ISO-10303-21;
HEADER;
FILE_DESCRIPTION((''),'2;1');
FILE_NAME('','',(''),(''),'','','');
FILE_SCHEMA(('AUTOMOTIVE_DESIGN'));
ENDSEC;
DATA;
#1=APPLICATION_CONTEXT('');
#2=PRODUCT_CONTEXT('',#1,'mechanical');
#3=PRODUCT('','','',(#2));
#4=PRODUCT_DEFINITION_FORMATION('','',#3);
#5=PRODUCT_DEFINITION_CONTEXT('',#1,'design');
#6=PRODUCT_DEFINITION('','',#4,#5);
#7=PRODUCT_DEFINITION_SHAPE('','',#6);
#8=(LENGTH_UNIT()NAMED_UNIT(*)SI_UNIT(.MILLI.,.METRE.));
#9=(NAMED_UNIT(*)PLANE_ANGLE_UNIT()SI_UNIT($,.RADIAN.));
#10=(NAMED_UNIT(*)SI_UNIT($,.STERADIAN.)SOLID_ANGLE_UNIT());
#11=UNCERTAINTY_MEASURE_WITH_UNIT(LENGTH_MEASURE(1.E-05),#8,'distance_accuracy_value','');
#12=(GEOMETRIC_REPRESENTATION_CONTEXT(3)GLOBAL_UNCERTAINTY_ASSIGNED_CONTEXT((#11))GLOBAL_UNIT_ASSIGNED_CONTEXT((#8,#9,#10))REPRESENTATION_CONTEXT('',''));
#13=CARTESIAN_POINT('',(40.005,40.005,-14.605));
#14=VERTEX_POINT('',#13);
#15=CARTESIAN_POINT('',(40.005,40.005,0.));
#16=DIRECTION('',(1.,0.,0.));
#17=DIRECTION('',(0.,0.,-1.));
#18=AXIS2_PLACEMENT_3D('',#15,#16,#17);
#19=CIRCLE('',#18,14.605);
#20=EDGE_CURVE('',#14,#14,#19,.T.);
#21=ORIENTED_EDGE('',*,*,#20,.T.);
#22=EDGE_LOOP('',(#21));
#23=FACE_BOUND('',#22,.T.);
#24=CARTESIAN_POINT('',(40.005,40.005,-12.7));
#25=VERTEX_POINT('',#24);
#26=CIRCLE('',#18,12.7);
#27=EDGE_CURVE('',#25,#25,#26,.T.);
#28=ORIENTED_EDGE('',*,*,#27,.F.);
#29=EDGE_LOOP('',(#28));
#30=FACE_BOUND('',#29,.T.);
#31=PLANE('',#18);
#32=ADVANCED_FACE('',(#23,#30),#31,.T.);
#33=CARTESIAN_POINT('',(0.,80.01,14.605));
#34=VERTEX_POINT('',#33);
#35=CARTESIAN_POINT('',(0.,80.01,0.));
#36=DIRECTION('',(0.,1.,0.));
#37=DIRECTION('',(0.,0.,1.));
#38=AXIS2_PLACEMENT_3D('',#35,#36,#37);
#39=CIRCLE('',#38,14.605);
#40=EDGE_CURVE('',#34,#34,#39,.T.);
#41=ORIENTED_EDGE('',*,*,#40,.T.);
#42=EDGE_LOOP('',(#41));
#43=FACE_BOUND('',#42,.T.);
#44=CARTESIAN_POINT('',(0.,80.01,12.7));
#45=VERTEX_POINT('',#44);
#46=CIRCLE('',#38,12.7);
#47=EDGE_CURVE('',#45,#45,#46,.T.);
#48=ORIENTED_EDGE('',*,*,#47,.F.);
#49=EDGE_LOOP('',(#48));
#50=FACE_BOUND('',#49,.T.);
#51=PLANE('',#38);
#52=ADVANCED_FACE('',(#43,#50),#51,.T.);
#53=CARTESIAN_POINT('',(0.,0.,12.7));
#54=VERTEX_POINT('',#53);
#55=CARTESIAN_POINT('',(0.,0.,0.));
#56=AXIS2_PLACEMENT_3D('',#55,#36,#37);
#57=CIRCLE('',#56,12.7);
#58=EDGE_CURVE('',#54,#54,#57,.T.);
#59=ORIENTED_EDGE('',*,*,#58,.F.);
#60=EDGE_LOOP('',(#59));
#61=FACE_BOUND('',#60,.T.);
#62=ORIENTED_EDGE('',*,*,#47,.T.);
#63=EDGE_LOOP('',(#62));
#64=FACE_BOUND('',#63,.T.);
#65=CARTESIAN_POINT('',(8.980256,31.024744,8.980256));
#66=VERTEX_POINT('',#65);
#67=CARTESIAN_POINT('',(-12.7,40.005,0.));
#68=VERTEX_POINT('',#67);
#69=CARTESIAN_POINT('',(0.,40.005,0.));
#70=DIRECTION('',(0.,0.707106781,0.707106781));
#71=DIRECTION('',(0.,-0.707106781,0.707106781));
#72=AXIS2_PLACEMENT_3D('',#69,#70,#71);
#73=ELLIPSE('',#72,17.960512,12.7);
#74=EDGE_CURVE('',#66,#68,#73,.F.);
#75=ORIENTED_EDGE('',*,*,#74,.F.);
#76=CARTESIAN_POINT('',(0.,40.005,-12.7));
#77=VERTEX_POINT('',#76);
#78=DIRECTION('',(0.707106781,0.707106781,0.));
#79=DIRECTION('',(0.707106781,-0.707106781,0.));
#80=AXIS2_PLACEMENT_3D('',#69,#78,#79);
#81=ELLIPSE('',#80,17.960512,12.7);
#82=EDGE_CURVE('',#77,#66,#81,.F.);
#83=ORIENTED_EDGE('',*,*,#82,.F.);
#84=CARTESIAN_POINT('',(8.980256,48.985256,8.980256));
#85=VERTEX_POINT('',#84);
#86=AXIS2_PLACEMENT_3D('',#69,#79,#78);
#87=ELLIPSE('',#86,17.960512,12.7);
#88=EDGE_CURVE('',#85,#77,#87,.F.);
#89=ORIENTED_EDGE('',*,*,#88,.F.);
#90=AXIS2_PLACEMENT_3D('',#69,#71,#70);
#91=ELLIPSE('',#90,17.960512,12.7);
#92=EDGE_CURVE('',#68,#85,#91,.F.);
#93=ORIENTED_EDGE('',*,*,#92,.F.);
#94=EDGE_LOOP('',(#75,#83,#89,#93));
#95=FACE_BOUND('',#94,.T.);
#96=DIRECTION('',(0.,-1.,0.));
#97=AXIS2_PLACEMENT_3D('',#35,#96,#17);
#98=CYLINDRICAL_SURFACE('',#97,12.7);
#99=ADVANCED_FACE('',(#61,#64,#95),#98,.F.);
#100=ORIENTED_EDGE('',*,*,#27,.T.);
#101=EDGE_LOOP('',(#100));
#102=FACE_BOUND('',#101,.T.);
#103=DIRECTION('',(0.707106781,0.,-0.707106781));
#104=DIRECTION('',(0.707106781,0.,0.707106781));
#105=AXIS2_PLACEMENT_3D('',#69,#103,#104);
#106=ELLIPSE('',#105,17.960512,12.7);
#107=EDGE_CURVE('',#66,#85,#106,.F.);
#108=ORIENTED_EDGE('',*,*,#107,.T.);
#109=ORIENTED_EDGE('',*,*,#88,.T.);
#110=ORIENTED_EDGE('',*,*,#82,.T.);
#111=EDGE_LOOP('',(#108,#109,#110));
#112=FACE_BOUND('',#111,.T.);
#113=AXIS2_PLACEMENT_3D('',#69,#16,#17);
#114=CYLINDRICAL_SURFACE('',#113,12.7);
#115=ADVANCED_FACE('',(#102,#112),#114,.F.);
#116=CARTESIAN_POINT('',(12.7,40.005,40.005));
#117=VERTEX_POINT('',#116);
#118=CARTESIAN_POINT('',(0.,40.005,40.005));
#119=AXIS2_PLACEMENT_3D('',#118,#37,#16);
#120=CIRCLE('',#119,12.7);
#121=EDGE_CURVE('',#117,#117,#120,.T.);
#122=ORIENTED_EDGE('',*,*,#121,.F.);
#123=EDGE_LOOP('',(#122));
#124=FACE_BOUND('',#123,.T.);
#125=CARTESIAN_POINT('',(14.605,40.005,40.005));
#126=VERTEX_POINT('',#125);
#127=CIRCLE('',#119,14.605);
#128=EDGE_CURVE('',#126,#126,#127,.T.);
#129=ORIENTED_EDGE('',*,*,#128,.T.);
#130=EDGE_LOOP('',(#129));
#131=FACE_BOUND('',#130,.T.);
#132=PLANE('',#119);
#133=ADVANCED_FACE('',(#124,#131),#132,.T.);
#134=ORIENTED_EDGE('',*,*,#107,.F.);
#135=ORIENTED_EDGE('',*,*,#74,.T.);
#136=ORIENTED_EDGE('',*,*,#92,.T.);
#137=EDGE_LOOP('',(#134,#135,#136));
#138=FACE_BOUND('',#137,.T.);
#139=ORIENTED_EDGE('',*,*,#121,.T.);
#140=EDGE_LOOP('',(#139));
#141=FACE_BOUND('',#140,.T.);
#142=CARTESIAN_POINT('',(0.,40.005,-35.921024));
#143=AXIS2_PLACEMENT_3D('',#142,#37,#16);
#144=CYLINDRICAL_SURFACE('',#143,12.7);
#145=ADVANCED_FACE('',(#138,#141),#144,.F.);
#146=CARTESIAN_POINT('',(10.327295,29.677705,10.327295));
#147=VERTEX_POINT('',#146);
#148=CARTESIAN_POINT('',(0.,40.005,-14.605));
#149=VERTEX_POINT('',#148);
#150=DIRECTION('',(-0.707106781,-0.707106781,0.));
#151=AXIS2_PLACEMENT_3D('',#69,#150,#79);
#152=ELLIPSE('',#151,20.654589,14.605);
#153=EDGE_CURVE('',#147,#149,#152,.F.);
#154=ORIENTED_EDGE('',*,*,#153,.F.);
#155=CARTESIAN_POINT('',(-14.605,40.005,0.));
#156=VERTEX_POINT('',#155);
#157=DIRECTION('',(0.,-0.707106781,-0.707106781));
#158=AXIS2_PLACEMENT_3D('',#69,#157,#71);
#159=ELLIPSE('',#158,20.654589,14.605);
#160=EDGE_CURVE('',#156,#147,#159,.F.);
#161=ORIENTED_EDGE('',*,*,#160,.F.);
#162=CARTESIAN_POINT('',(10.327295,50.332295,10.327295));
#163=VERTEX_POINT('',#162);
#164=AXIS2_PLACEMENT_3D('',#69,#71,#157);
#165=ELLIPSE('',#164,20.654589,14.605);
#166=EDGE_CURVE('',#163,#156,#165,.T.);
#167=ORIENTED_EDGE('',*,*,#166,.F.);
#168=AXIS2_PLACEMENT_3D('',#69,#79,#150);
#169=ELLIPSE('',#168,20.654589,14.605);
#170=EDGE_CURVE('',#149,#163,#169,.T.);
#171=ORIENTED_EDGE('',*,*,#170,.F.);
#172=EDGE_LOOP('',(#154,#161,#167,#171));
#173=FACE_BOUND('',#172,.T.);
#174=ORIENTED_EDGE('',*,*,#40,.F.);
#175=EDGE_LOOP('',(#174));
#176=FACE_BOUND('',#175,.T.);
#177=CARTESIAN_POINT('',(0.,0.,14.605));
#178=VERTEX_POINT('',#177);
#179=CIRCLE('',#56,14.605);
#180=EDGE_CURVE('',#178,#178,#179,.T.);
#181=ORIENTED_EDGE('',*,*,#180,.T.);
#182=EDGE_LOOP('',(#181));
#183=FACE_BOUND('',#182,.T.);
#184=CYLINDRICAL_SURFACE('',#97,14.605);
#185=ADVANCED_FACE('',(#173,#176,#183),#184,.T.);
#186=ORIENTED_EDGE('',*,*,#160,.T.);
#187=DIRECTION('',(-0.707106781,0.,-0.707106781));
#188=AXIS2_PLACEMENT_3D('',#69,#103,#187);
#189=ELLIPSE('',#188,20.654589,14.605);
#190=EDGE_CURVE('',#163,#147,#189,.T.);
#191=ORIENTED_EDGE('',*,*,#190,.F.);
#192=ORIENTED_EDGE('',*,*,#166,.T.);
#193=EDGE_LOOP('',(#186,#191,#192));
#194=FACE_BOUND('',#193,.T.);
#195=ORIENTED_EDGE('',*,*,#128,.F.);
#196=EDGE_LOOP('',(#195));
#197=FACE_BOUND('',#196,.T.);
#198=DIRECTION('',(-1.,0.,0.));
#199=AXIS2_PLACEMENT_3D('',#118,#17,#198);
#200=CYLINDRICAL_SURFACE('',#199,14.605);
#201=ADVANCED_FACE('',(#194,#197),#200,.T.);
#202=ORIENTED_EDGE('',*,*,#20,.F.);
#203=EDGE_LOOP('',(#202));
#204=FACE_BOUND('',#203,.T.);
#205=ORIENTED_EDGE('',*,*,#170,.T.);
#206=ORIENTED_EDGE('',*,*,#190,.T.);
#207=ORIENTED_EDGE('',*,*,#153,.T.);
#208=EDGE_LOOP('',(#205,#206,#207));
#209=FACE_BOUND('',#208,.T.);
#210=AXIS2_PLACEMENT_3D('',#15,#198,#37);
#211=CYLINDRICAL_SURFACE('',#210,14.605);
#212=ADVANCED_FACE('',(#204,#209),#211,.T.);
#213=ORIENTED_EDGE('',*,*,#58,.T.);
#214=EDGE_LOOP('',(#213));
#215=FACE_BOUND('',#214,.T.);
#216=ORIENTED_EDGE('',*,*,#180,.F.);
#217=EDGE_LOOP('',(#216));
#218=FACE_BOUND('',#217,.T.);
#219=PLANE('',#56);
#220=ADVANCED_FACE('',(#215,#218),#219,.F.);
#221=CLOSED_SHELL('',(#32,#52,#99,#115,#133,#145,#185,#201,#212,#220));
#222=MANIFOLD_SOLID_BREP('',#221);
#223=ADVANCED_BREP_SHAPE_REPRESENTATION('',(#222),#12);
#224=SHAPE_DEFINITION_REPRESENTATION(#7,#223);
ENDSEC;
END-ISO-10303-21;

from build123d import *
from OCP.BRepAlgoAPI import BRepAlgoAPI_Cut
from OCP.TopTools import TopTools_ListOfShape

# Parameters (mm, degrees)
SKETCH3_R           = 14.605
SKETCH3_R_2         = 12.7
BOSS_EXTRUDE2_DEPTH = 80.01
SKETCH4_R           = 14.605
BOSS_EXTRUDE3_DEPTH = 40.005
SKETCH5_R           = 12.7
CUT_EXTRUDE1_DEPTH  = 40.005
SKETCH6_R           = 14.605
BOSS_EXTRUDE4_DEPTH = 40.005
SKETCH7_R           = 12.7
CUT_EXTRUDE2_DEPTH  = 40.005
SKETCH8_R           = 12.7
CUT_EXTRUDE3_DEPTH  = 98.991837283
CUT_EXTRUDE4_REACH  = 106.806
SKETCH9_R           = 12.7


with BuildPart() as part:
    # Sketch3 → Boss-Extrude2 (new body)
    with BuildSketch(Plane(origin=(0, 0, 0), x_dir=(1, 0, 0), z_dir=(0, 1, 0))):
        with Locations(Location((0, 0, 0), (0, 0, 270))):
            Circle(SKETCH3_R)
        with Locations(Location((0, 0, 0), (0, 0, 270))):
            Circle(SKETCH3_R_2, mode=Mode.SUBTRACT)
    extrude(amount=BOSS_EXTRUDE2_DEPTH)

    # Sketch4 → Boss-Extrude3 (add)
    with BuildSketch(Plane.XY):
        with Locations((0, 40.005)):
            Circle(SKETCH4_R)
    extrude(amount=BOSS_EXTRUDE3_DEPTH)

    # Sketch5 → Cut-Extrude1 (cut)
    with BuildSketch(Plane.XY.offset(40.005)):
        with Locations((0, 40.005)):
            Circle(SKETCH5_R)
    extrude(amount=-CUT_EXTRUDE1_DEPTH, mode=Mode.SUBTRACT)

    # Sketch6 → Boss-Extrude4 (add)
    with BuildSketch(Plane(origin=(0, 0, 0), x_dir=(0, 0, -1), z_dir=(1, 0, 0))):
        with Locations((0, 40.005)):
            Circle(SKETCH6_R)
    extrude(amount=BOSS_EXTRUDE4_DEPTH)

    # Sketch7 → Cut-Extrude2 (cut)
    with BuildSketch(Plane(origin=(40.005, 0, 0), x_dir=(0, 0, -1), z_dir=(1, 0, 0))):
        with Locations((0, 40.005)):
            Circle(SKETCH7_R)
    extrude(amount=-CUT_EXTRUDE2_DEPTH, mode=Mode.SUBTRACT)


with BuildPart() as cut_extrude3_tool:
    # Sketch8 → Cut-Extrude3 (new, through all)
    with BuildSketch(Plane(origin=(0, 80.01, 0), x_dir=(1, 0, 0), z_dir=(0, 1, 0))):
        with Locations(Location((0, 0, 0), (0, 0, 270))):
            Circle(SKETCH8_R)
    extrude(amount=-CUT_EXTRUDE3_DEPTH)


with BuildPart() as part_1:
    add(part.part)

    # Cut-Extrude3: cut by cut_extrude3_tool, with a tolerance
    cut_extrude3_stock = TopTools_ListOfShape()
    cut_extrude3_stock.Append(part_1.part.wrapped)
    cut_extrude3_tools = TopTools_ListOfShape()
    cut_extrude3_tools.Append(cut_extrude3_tool.part.wrapped)
    cut_extrude3_cut = BRepAlgoAPI_Cut()
    cut_extrude3_cut.SetArguments(cut_extrude3_stock)
    cut_extrude3_cut.SetTools(cut_extrude3_tools)
    cut_extrude3_cut.SetFuzzyValue(0.00001)
    cut_extrude3_cut.Build()
    add(Compound.cast(cut_extrude3_cut.Shape()).solids(), mode=Mode.REPLACE)

    # Sketch9 → Cut-Extrude4 (cut, up to next)
    with BuildSketch(Plane.XY.offset(40.005), mode=Mode.PRIVATE) as cut_extrude4_sk1:
        with Locations((0, 40.005)):
            Circle(SKETCH9_R)
    cut_extrude4_tool1 = extrude(cut_extrude4_sk1.sketch, amount=-CUT_EXTRUDE4_REACH, mode=Mode.PRIVATE) & part_1.part
    add(cut_extrude4_tool1.solids().sort_by_distance((0, 40.005, 40.005))[0], mode=Mode.SUBTRACT)


solid = part_1.part
